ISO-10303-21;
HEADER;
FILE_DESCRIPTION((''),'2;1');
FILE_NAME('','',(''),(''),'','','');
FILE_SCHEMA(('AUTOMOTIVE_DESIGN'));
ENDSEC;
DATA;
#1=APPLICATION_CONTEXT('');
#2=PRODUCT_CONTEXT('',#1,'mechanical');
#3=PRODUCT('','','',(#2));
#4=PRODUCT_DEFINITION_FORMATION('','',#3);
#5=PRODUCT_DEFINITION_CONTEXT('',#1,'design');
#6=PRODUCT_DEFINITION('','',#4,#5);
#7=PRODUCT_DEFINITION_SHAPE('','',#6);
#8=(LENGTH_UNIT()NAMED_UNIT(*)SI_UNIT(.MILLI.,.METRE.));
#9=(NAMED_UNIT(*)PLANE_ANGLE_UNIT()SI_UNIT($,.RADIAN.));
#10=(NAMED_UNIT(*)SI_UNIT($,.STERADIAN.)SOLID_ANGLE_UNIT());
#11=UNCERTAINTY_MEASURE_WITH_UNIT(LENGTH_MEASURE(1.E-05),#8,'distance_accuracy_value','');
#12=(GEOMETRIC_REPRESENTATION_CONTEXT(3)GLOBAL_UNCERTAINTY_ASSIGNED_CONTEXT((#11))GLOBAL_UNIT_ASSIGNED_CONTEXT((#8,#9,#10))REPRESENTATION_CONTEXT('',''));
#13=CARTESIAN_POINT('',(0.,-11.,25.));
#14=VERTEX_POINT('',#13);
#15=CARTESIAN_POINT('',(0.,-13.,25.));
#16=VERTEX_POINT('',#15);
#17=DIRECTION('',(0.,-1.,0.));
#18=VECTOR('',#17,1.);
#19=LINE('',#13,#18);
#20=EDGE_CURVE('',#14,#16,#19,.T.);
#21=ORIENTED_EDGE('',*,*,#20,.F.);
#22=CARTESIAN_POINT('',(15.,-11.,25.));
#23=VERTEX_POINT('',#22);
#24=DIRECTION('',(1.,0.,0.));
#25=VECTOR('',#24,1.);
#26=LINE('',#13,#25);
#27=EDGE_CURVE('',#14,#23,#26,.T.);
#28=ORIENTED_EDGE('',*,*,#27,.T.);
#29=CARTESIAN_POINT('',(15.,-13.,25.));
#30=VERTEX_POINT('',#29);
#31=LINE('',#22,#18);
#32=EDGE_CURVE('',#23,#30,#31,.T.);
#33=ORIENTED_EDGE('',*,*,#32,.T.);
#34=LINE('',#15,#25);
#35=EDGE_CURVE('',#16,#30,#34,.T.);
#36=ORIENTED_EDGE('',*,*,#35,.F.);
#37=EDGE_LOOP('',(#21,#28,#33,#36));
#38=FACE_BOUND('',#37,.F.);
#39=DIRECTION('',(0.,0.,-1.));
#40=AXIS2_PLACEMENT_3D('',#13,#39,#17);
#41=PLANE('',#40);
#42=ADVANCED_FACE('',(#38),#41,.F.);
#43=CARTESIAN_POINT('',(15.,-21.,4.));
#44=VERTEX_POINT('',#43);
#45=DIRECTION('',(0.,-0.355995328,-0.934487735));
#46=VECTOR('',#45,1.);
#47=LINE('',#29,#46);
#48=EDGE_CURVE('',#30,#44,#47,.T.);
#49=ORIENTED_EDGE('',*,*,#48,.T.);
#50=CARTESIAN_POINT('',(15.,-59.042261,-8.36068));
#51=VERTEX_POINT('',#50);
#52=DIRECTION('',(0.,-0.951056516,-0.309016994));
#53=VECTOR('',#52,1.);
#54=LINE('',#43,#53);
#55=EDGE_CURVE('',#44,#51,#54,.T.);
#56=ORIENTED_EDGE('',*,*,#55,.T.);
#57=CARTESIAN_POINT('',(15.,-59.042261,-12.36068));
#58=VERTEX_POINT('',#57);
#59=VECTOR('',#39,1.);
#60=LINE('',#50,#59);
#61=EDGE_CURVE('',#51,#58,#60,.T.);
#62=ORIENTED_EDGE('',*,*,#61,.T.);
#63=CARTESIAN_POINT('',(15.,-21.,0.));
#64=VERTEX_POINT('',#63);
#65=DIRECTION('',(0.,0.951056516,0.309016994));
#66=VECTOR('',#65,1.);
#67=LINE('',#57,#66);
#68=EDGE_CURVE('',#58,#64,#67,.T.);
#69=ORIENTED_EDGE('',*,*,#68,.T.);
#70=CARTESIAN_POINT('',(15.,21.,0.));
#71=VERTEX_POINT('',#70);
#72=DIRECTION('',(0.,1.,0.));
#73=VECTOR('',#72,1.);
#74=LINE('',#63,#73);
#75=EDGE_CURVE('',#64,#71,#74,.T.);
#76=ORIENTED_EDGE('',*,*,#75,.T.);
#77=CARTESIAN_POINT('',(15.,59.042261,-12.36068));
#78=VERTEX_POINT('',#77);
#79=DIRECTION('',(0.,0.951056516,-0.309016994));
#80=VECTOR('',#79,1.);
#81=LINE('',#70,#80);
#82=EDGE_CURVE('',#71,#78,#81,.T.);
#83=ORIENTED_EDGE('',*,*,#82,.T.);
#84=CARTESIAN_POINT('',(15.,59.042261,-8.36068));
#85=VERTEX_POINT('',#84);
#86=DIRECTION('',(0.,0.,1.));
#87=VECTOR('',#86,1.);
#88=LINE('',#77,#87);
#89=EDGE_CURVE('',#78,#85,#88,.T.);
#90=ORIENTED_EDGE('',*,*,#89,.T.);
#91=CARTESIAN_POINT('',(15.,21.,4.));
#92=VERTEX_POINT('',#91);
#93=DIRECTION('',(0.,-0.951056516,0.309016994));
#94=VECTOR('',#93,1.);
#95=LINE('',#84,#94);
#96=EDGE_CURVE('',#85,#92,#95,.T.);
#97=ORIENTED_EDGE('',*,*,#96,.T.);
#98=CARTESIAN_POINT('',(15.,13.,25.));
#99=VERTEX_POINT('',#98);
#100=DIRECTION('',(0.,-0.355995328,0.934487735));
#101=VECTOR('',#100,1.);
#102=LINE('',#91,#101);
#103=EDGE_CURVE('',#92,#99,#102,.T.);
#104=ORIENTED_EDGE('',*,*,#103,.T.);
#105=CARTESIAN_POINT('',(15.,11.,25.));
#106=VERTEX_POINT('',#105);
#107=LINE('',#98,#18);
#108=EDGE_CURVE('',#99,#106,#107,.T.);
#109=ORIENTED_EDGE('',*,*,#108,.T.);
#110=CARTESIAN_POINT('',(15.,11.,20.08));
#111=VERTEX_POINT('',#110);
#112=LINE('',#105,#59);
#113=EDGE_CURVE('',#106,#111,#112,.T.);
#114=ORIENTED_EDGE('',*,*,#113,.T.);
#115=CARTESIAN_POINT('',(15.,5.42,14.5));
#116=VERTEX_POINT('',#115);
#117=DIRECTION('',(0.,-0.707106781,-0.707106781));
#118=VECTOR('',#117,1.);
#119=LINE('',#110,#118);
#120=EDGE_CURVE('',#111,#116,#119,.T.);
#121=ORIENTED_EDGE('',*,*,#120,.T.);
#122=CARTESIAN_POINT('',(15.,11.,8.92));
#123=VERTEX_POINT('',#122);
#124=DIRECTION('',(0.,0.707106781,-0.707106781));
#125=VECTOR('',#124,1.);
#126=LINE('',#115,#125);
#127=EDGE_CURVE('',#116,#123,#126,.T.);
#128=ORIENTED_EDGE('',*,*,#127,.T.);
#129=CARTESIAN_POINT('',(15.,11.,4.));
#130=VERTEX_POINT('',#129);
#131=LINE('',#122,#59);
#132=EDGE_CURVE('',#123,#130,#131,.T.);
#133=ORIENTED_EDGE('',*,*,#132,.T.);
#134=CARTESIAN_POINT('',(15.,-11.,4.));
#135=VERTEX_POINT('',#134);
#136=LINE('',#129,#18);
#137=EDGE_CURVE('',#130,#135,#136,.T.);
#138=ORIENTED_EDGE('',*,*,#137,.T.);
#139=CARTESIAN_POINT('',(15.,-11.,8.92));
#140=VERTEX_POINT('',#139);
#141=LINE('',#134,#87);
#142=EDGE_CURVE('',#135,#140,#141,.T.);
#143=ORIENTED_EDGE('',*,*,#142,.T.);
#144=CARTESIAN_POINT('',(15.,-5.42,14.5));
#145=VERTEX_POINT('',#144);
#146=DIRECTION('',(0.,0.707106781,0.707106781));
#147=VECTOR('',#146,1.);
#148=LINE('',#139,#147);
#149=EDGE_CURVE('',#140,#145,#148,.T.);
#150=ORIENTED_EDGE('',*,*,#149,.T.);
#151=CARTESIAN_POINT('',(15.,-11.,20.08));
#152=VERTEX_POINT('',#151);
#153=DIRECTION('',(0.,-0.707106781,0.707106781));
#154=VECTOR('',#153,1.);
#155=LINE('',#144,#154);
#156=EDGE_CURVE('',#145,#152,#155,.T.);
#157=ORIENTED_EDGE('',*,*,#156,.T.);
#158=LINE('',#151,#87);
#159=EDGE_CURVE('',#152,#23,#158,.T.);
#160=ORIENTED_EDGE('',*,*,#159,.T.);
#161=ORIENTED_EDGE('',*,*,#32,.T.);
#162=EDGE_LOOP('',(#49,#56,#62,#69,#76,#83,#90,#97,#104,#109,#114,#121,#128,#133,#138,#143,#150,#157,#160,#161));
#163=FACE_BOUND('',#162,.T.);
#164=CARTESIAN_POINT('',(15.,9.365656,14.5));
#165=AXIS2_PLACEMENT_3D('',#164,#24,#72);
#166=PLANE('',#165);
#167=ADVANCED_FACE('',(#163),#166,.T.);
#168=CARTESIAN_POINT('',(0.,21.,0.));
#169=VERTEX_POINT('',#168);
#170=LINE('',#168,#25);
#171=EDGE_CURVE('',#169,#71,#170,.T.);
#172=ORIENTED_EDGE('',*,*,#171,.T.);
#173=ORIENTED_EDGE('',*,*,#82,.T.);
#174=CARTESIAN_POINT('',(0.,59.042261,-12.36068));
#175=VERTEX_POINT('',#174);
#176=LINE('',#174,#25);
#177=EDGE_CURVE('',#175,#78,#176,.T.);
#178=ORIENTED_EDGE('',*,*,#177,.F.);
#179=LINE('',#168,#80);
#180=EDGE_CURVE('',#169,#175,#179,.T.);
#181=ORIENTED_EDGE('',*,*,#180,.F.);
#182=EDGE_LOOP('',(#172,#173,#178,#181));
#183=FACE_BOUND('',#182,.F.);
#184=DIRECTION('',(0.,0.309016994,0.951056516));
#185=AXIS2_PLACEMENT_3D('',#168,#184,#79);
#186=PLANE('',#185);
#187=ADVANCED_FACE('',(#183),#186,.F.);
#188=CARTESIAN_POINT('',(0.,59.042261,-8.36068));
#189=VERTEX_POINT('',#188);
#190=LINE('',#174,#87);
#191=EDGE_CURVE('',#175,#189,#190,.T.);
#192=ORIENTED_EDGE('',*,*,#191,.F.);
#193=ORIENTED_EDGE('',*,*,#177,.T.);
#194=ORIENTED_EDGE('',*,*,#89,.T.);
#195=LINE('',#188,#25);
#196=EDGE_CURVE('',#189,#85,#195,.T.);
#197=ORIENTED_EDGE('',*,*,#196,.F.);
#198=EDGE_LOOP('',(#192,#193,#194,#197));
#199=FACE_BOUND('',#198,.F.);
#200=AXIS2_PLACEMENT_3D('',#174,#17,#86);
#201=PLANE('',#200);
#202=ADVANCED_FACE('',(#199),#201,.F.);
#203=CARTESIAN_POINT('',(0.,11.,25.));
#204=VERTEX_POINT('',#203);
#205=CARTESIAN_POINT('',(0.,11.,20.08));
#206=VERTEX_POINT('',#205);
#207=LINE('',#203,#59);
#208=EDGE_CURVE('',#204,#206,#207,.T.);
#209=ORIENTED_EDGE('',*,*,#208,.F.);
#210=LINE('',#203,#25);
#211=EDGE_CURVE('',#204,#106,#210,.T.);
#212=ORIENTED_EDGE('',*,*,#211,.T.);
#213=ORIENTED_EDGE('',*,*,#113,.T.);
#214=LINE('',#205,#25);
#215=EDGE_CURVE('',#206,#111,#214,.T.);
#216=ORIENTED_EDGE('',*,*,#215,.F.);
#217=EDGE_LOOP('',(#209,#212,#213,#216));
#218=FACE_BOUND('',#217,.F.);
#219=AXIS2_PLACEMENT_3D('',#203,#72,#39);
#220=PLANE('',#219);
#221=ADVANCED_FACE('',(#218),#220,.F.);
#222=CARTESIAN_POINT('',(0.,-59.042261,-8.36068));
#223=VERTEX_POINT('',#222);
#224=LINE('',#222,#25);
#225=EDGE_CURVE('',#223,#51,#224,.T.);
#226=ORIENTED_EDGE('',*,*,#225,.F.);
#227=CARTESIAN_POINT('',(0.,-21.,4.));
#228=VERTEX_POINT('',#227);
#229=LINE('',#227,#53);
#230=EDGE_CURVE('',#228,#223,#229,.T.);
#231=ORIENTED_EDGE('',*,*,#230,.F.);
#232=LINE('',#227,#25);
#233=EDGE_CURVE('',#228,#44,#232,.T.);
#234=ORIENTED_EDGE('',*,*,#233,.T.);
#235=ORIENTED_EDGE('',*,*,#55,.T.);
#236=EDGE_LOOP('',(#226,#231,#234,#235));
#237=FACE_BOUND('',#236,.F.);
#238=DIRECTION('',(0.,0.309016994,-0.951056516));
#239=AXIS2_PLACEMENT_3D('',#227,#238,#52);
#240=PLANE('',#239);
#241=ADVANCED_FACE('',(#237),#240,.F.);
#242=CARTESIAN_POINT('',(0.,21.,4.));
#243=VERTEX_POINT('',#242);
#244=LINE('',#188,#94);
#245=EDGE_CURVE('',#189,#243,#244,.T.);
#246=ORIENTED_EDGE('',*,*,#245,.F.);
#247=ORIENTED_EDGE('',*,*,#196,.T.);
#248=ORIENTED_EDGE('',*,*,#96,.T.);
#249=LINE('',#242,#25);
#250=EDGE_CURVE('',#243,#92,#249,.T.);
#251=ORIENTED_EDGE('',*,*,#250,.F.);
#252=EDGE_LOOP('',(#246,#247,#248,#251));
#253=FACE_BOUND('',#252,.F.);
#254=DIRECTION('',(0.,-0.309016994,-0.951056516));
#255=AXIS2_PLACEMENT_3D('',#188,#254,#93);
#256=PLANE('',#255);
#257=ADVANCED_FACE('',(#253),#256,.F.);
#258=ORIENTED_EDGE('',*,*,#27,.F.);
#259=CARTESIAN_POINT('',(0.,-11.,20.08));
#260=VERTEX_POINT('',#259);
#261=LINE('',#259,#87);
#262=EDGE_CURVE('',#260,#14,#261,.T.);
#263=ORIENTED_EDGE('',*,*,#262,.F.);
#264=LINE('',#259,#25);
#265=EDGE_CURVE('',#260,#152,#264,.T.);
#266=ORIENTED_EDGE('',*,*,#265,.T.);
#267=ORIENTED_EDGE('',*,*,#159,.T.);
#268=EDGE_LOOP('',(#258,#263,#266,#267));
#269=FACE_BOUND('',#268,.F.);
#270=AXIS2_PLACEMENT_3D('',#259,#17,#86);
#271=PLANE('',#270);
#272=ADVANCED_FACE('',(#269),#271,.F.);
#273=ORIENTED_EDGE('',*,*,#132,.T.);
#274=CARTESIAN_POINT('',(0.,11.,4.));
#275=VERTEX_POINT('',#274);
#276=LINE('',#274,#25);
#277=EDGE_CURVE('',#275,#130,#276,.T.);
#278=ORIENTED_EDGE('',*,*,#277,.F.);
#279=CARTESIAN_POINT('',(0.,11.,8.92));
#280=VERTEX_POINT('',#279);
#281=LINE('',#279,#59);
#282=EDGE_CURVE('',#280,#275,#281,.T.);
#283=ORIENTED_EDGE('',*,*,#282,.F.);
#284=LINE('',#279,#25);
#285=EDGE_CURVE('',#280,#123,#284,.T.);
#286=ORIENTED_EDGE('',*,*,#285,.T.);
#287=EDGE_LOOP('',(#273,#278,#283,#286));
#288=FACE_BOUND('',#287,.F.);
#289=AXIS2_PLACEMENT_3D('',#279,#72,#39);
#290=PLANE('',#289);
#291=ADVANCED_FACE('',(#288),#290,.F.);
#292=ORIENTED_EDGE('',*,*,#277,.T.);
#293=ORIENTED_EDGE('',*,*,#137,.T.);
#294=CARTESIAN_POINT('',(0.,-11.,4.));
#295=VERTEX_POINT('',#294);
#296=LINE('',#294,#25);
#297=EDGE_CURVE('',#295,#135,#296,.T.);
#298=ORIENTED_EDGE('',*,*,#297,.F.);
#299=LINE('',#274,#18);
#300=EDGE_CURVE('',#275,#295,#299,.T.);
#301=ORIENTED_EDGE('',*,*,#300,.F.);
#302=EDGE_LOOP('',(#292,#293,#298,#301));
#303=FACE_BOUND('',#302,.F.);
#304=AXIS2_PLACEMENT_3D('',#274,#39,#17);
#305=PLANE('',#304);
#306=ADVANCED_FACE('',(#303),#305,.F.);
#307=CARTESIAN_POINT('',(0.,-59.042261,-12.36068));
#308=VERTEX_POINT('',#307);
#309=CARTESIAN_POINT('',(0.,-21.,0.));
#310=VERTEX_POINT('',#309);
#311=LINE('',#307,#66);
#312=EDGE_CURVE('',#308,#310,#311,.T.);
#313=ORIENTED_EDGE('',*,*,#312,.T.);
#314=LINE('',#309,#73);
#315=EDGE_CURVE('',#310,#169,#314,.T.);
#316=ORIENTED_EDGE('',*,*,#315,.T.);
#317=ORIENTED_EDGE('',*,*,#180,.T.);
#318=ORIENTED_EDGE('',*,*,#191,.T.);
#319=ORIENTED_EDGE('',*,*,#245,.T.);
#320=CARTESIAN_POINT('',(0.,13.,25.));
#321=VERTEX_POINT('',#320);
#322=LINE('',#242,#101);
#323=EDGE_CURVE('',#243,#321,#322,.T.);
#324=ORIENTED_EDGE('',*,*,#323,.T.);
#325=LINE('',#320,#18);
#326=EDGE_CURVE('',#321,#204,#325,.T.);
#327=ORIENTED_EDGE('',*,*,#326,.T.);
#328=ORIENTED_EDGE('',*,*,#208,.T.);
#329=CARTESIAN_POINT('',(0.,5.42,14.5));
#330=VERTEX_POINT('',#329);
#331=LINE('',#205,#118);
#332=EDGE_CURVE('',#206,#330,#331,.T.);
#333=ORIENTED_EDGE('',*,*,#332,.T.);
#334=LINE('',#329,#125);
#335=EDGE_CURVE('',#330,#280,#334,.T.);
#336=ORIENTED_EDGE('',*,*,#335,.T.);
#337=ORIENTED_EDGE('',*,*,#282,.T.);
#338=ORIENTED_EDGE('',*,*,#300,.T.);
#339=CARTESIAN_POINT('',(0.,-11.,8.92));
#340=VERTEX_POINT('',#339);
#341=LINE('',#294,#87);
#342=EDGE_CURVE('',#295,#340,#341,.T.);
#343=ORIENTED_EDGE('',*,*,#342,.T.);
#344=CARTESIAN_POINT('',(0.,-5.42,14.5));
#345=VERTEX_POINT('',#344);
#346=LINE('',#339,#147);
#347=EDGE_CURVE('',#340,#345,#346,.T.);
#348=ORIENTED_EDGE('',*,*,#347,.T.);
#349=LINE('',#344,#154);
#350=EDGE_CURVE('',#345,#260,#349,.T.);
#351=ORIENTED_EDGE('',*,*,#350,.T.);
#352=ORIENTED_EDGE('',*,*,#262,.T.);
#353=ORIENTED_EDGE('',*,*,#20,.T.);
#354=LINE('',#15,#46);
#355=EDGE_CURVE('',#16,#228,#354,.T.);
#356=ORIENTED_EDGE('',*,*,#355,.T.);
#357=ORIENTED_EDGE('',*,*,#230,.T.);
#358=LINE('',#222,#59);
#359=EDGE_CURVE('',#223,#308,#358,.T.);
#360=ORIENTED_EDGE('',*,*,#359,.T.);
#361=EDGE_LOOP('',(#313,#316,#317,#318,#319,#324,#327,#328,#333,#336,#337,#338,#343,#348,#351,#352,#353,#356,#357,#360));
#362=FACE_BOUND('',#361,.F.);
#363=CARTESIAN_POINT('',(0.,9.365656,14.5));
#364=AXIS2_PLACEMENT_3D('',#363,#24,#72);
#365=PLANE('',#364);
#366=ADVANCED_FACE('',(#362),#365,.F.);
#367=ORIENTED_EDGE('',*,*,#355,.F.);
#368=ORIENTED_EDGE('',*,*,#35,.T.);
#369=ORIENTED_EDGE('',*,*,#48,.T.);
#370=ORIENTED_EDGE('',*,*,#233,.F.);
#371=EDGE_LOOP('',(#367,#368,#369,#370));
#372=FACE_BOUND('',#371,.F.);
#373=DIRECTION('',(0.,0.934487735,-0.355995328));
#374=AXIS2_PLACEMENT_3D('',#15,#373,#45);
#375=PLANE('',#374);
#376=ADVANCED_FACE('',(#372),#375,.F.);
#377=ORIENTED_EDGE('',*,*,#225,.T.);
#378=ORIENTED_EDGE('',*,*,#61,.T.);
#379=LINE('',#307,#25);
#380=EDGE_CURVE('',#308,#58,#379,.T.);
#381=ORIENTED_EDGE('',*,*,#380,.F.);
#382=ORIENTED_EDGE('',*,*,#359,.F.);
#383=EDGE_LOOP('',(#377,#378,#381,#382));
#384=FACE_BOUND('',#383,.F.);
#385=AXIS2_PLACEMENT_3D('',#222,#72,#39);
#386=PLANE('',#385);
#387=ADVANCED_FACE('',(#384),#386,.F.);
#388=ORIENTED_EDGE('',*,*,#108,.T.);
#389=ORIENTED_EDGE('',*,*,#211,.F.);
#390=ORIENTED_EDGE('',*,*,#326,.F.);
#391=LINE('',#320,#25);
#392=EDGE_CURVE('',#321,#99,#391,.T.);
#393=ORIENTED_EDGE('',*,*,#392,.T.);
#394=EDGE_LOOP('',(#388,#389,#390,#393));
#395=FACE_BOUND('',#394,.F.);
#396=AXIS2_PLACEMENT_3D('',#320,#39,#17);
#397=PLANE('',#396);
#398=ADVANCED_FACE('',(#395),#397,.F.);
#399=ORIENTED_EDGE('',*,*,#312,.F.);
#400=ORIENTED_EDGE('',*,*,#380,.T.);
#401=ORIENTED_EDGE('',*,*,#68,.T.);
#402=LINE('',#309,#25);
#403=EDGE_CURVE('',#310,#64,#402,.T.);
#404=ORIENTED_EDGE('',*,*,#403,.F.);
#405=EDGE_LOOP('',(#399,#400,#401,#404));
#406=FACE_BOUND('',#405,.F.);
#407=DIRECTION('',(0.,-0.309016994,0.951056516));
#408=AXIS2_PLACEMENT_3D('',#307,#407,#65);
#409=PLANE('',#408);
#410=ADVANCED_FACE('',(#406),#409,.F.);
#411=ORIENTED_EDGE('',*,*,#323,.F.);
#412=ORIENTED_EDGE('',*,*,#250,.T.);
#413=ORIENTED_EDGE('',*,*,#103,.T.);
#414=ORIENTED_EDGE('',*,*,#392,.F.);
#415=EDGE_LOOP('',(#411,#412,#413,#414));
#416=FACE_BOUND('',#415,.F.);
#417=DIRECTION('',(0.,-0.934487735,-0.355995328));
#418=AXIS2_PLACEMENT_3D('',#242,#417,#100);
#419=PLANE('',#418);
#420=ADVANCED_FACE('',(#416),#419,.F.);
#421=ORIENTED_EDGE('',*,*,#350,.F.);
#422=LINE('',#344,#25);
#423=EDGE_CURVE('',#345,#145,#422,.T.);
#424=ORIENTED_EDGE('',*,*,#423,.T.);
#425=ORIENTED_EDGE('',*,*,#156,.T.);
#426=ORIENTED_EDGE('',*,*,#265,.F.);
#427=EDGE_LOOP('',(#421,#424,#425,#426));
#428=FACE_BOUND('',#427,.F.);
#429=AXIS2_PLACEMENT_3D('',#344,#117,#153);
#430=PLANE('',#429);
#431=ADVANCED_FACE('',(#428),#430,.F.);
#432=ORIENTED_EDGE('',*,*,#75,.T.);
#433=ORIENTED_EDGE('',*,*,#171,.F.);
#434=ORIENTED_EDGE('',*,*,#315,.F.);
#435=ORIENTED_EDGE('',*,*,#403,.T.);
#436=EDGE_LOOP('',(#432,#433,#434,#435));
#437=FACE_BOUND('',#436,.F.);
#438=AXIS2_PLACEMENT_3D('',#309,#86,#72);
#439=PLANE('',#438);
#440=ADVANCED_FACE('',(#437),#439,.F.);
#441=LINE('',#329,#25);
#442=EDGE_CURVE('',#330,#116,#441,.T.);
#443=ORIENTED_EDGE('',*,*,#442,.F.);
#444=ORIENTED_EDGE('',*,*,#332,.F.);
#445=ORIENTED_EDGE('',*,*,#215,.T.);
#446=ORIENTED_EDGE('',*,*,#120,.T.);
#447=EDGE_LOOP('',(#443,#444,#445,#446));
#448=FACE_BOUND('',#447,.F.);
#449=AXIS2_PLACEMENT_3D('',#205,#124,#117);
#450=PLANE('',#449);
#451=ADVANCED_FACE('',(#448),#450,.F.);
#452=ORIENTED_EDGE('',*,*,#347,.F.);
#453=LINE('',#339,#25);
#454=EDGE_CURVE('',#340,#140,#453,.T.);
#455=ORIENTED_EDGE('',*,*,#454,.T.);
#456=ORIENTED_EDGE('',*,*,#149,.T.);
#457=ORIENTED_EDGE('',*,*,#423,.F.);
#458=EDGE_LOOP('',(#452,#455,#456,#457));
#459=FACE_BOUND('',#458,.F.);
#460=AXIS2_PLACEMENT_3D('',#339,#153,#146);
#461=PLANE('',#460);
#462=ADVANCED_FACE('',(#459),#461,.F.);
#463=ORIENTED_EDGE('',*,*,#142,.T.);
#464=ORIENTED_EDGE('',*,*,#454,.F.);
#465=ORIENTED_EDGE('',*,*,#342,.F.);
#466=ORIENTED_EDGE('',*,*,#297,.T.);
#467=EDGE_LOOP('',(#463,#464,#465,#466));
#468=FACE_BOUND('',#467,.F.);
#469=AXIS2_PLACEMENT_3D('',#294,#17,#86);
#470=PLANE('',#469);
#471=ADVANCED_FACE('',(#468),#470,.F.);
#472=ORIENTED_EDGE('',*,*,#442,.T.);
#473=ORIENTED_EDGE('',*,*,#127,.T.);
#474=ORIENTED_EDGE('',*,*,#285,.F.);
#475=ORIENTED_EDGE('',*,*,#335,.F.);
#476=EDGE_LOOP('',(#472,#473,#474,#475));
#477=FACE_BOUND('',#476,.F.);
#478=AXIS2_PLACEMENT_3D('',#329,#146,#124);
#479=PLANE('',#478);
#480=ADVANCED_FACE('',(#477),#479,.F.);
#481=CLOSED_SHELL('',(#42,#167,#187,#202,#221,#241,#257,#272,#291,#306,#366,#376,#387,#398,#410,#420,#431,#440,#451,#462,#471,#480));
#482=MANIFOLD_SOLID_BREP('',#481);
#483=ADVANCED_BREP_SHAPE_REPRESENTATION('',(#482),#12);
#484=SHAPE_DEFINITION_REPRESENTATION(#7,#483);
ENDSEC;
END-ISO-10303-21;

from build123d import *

# Parameters (mm, degrees)
F1_DEPTH = 15


# Not quite as in the source:
# - a feature names something its author has since deleted; it is built from what else it names


with BuildPart() as f1:
    # F0 (on Right) → F1 (new body)
    with BuildSketch(Plane.YZ):
        Polygon((5.42, 14.5), (11, 8.92), (11, 20.08), align=None)
        Polygon((-11, 20.08), (-11, 8.92), (-5.42, 14.5), align=None)
        Polygon((-21, 4), (-21, 0), (0, 0), (0, 4), (-11, 4), align=None)
        Polygon((0, 4), (0, 0), (21, 0), (21, 4), (11, 4), align=None)
        Polygon((11, 4), (21, 4), (13, 25), (11, 25), (11, 20.08), (11, 8.92), align=None)
        Polygon((-13, 25), (-21, 4), (-11, 4), (-11, 8.92), (-11, 20.08), (-11, 25), align=None)
        Polygon((21, 4), (21, 0), (59.0422606518, -12.360679775), (59.0422606518, -8.360679775), align=None)
        Polygon((-59.0422606518, -12.360679775), (-21, 0), (-21, 4), (-59.0422606518, -8.360679775), align=None)
    extrude(amount=F1_DEPTH)


solid = f1.part
